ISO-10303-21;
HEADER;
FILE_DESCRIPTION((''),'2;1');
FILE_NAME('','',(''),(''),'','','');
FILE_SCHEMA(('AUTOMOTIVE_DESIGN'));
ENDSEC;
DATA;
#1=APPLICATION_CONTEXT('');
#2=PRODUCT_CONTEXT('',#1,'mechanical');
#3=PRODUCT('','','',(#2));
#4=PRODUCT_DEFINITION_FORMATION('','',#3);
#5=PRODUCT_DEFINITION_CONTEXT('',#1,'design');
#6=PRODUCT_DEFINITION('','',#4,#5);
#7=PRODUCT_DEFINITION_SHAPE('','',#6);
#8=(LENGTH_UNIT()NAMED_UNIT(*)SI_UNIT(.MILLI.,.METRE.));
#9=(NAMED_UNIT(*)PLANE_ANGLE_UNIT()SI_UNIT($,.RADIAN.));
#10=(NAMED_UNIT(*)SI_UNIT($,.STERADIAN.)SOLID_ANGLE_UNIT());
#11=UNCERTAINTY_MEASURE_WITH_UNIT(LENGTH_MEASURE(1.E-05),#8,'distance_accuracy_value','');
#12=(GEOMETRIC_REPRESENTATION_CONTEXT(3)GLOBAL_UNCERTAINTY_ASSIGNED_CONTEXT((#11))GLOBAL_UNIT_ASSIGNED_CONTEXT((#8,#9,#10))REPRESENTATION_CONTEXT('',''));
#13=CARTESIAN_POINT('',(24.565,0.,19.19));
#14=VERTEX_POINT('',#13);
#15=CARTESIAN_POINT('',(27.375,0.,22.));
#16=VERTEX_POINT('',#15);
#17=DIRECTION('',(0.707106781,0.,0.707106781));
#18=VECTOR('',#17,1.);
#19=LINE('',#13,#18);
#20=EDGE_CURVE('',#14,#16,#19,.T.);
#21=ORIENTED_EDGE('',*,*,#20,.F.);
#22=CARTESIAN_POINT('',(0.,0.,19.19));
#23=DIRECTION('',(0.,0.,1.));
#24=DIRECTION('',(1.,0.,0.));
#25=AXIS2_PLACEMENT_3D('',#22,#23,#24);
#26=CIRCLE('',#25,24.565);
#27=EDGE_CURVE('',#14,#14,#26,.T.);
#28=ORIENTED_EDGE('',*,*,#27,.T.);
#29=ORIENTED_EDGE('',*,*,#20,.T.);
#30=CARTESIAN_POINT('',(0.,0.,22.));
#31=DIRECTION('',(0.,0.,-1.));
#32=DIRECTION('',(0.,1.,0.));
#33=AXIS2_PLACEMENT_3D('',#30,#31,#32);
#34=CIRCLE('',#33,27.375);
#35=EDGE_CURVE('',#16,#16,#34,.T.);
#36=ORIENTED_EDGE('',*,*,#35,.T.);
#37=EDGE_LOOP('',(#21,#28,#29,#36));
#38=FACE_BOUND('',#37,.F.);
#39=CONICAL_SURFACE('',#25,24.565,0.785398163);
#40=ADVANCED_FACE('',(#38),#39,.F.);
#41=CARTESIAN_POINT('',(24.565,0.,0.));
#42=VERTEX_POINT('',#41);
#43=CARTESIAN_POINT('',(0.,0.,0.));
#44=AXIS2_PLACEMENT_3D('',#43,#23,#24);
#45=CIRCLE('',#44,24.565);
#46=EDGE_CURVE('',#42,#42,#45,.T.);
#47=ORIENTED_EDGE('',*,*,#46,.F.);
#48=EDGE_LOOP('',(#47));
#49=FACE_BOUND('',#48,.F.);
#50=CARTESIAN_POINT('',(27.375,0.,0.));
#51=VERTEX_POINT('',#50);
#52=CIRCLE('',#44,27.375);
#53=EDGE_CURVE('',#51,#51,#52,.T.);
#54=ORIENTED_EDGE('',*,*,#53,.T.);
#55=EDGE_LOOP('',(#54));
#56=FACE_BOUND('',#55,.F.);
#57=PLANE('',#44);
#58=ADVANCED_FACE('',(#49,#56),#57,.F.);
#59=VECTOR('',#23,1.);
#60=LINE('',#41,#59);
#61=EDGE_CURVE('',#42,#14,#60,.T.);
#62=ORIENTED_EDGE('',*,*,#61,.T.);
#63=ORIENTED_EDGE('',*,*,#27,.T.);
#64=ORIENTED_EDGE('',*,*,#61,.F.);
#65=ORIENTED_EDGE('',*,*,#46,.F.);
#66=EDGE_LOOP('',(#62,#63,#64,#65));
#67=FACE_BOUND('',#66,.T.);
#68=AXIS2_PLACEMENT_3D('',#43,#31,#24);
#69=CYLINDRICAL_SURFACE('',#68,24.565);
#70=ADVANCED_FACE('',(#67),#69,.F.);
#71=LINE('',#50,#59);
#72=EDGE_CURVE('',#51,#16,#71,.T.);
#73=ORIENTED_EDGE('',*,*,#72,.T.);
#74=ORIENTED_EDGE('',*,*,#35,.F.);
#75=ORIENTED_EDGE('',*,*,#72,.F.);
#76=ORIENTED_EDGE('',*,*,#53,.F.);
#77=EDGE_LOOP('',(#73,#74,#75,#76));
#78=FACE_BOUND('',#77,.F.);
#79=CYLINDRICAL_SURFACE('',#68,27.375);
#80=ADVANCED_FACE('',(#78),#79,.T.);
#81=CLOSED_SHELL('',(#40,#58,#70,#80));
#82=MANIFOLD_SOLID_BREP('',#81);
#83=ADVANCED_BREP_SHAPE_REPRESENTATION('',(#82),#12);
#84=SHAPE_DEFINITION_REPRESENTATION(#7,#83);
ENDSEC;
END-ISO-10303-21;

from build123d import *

# Parameters (mm, degrees)
F0_R     = 27.375
F0_R_2   = 24.565
F1_DEPTH = 22.09


# Not quite as in the source:
# - a fillet or chamfer that OpenCascade refuses, or shapes differently, is made with other operations: its cross-section is extruded or revolved along the edge and cut away or added


with BuildPart() as f1:
    # F0 (on Top) → F1 (new body)
    with BuildSketch(Plane.XY):
        Circle(F0_R)
        Circle(F0_R_2, mode=Mode.SUBTRACT)
    extrude(amount=F1_DEPTH)

    # F2: chamfer of 2.9 on 1 edges, made by hand

    # F2_s1 → F2_t2 (revolve, cut)
    with BuildSketch(Plane.XZ):
        Polygon((24.565, 19.19), (27.465, 22.09), (24.565, 22.09), align=None)
    revolve(axis=Axis((0, 0, 22.09), (0, 0, 1)), mode=Mode.SUBTRACT)


solid = f1.part
